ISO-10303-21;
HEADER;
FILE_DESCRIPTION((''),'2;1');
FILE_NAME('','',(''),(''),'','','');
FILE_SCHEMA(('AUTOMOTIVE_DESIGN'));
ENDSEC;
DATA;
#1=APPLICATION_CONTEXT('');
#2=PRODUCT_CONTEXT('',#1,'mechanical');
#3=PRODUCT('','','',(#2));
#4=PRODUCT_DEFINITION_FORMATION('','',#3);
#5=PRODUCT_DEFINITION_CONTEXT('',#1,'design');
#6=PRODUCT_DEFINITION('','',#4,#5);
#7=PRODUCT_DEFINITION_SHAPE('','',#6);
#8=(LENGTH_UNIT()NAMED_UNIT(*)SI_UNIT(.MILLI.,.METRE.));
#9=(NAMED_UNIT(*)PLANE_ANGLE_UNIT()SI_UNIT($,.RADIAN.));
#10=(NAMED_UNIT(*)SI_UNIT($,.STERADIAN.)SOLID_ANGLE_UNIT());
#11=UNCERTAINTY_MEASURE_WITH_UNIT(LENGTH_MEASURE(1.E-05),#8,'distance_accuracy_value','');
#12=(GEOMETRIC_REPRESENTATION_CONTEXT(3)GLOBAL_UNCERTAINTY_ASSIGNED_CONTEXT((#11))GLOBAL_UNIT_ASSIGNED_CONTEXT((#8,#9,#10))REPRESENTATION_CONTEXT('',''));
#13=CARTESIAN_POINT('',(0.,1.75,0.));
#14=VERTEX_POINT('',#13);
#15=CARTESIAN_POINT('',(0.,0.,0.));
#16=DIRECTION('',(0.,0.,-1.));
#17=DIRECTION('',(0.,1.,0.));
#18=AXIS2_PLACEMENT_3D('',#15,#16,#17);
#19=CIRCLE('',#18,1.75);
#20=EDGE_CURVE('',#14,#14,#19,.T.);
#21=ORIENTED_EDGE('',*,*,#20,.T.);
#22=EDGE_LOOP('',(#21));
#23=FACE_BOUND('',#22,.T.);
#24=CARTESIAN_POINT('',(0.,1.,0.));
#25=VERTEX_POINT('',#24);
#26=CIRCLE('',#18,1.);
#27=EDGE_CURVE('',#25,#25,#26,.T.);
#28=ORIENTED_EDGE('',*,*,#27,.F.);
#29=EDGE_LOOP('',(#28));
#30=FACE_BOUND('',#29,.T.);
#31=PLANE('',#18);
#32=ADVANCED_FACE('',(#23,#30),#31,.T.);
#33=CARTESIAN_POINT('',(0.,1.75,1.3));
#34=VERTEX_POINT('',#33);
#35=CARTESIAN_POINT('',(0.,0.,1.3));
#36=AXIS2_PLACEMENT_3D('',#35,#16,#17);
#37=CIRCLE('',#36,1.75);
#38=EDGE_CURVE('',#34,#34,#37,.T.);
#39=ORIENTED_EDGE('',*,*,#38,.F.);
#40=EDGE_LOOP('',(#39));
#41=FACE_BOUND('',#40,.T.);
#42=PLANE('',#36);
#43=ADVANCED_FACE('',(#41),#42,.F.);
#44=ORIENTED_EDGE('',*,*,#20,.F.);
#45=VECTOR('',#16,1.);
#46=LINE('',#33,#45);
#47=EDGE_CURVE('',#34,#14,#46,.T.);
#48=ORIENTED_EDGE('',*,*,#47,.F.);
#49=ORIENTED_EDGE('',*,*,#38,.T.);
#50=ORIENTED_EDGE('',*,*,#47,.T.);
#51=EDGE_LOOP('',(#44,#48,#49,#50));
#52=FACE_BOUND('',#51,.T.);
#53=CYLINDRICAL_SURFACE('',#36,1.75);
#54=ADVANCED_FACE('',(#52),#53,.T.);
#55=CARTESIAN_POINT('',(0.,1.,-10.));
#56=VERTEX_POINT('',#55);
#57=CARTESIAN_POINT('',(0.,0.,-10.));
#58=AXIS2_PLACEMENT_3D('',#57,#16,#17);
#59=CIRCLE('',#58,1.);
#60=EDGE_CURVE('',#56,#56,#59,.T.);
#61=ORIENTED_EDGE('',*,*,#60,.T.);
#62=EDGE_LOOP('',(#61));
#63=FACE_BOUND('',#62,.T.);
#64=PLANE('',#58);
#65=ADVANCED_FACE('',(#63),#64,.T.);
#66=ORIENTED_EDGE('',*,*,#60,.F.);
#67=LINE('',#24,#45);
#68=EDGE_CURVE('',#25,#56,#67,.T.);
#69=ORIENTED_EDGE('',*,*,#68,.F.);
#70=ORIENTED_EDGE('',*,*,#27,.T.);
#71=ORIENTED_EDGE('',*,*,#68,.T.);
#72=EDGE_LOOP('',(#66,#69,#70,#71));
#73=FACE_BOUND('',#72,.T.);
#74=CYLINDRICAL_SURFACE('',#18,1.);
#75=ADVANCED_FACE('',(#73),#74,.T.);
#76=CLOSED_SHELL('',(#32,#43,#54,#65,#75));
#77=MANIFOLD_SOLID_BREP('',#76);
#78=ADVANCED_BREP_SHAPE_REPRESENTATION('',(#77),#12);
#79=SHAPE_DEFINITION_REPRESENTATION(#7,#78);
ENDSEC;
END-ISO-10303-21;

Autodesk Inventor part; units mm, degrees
ref_plane "YZ Plane" through (0, 0, 0) normal (1, 0, 0) x (0, 1, 0)
ref_plane "XZ Plane" through (0, 0, 0) normal (0, 1, 0) x (-1, 0, 0)
ref_plane "XY Plane" through (0, 0, 0) normal (0, 0, 1) x (1, 0, 0)
sketch "スケッチ1" plane through (0, 0, 0) normal (1, 0, 0) x (0, 1, 0)
  point P0 (0, 0)
sketch "スケッチ2" plane through (0, 0, 0) normal (1, 0, 0) x (0, 1, 0)
  line L0 (0, 1.3) -> (1.75, 1.3)
  line L1 (1.75, 1.3) -> (1.75, 0)
  line L2 (1.75, 0) -> (1, 0)
  line L3 (1, 0) -> (1, -12)
  line L4 (1, -12) -> (0, -12)
  line L5 (0, 1.3) -> (0, -12)
  point P0 (0, 0)
  dimension "d0" = 1.3
  dimension "d1" = 12
  dimension "d2" = 1
  dimension "d3" = 1.75
revolve "回転1" add sketch "スケッチ2" angle 360 about axis through (0, 0, 1.3) along (0, 0, -1)
move faces "移動1" translate (0, 0, 2) faces at (0.3117, 0.1182, -12)
properties part number "ScrewM2L10" material "鉄 灰色"
